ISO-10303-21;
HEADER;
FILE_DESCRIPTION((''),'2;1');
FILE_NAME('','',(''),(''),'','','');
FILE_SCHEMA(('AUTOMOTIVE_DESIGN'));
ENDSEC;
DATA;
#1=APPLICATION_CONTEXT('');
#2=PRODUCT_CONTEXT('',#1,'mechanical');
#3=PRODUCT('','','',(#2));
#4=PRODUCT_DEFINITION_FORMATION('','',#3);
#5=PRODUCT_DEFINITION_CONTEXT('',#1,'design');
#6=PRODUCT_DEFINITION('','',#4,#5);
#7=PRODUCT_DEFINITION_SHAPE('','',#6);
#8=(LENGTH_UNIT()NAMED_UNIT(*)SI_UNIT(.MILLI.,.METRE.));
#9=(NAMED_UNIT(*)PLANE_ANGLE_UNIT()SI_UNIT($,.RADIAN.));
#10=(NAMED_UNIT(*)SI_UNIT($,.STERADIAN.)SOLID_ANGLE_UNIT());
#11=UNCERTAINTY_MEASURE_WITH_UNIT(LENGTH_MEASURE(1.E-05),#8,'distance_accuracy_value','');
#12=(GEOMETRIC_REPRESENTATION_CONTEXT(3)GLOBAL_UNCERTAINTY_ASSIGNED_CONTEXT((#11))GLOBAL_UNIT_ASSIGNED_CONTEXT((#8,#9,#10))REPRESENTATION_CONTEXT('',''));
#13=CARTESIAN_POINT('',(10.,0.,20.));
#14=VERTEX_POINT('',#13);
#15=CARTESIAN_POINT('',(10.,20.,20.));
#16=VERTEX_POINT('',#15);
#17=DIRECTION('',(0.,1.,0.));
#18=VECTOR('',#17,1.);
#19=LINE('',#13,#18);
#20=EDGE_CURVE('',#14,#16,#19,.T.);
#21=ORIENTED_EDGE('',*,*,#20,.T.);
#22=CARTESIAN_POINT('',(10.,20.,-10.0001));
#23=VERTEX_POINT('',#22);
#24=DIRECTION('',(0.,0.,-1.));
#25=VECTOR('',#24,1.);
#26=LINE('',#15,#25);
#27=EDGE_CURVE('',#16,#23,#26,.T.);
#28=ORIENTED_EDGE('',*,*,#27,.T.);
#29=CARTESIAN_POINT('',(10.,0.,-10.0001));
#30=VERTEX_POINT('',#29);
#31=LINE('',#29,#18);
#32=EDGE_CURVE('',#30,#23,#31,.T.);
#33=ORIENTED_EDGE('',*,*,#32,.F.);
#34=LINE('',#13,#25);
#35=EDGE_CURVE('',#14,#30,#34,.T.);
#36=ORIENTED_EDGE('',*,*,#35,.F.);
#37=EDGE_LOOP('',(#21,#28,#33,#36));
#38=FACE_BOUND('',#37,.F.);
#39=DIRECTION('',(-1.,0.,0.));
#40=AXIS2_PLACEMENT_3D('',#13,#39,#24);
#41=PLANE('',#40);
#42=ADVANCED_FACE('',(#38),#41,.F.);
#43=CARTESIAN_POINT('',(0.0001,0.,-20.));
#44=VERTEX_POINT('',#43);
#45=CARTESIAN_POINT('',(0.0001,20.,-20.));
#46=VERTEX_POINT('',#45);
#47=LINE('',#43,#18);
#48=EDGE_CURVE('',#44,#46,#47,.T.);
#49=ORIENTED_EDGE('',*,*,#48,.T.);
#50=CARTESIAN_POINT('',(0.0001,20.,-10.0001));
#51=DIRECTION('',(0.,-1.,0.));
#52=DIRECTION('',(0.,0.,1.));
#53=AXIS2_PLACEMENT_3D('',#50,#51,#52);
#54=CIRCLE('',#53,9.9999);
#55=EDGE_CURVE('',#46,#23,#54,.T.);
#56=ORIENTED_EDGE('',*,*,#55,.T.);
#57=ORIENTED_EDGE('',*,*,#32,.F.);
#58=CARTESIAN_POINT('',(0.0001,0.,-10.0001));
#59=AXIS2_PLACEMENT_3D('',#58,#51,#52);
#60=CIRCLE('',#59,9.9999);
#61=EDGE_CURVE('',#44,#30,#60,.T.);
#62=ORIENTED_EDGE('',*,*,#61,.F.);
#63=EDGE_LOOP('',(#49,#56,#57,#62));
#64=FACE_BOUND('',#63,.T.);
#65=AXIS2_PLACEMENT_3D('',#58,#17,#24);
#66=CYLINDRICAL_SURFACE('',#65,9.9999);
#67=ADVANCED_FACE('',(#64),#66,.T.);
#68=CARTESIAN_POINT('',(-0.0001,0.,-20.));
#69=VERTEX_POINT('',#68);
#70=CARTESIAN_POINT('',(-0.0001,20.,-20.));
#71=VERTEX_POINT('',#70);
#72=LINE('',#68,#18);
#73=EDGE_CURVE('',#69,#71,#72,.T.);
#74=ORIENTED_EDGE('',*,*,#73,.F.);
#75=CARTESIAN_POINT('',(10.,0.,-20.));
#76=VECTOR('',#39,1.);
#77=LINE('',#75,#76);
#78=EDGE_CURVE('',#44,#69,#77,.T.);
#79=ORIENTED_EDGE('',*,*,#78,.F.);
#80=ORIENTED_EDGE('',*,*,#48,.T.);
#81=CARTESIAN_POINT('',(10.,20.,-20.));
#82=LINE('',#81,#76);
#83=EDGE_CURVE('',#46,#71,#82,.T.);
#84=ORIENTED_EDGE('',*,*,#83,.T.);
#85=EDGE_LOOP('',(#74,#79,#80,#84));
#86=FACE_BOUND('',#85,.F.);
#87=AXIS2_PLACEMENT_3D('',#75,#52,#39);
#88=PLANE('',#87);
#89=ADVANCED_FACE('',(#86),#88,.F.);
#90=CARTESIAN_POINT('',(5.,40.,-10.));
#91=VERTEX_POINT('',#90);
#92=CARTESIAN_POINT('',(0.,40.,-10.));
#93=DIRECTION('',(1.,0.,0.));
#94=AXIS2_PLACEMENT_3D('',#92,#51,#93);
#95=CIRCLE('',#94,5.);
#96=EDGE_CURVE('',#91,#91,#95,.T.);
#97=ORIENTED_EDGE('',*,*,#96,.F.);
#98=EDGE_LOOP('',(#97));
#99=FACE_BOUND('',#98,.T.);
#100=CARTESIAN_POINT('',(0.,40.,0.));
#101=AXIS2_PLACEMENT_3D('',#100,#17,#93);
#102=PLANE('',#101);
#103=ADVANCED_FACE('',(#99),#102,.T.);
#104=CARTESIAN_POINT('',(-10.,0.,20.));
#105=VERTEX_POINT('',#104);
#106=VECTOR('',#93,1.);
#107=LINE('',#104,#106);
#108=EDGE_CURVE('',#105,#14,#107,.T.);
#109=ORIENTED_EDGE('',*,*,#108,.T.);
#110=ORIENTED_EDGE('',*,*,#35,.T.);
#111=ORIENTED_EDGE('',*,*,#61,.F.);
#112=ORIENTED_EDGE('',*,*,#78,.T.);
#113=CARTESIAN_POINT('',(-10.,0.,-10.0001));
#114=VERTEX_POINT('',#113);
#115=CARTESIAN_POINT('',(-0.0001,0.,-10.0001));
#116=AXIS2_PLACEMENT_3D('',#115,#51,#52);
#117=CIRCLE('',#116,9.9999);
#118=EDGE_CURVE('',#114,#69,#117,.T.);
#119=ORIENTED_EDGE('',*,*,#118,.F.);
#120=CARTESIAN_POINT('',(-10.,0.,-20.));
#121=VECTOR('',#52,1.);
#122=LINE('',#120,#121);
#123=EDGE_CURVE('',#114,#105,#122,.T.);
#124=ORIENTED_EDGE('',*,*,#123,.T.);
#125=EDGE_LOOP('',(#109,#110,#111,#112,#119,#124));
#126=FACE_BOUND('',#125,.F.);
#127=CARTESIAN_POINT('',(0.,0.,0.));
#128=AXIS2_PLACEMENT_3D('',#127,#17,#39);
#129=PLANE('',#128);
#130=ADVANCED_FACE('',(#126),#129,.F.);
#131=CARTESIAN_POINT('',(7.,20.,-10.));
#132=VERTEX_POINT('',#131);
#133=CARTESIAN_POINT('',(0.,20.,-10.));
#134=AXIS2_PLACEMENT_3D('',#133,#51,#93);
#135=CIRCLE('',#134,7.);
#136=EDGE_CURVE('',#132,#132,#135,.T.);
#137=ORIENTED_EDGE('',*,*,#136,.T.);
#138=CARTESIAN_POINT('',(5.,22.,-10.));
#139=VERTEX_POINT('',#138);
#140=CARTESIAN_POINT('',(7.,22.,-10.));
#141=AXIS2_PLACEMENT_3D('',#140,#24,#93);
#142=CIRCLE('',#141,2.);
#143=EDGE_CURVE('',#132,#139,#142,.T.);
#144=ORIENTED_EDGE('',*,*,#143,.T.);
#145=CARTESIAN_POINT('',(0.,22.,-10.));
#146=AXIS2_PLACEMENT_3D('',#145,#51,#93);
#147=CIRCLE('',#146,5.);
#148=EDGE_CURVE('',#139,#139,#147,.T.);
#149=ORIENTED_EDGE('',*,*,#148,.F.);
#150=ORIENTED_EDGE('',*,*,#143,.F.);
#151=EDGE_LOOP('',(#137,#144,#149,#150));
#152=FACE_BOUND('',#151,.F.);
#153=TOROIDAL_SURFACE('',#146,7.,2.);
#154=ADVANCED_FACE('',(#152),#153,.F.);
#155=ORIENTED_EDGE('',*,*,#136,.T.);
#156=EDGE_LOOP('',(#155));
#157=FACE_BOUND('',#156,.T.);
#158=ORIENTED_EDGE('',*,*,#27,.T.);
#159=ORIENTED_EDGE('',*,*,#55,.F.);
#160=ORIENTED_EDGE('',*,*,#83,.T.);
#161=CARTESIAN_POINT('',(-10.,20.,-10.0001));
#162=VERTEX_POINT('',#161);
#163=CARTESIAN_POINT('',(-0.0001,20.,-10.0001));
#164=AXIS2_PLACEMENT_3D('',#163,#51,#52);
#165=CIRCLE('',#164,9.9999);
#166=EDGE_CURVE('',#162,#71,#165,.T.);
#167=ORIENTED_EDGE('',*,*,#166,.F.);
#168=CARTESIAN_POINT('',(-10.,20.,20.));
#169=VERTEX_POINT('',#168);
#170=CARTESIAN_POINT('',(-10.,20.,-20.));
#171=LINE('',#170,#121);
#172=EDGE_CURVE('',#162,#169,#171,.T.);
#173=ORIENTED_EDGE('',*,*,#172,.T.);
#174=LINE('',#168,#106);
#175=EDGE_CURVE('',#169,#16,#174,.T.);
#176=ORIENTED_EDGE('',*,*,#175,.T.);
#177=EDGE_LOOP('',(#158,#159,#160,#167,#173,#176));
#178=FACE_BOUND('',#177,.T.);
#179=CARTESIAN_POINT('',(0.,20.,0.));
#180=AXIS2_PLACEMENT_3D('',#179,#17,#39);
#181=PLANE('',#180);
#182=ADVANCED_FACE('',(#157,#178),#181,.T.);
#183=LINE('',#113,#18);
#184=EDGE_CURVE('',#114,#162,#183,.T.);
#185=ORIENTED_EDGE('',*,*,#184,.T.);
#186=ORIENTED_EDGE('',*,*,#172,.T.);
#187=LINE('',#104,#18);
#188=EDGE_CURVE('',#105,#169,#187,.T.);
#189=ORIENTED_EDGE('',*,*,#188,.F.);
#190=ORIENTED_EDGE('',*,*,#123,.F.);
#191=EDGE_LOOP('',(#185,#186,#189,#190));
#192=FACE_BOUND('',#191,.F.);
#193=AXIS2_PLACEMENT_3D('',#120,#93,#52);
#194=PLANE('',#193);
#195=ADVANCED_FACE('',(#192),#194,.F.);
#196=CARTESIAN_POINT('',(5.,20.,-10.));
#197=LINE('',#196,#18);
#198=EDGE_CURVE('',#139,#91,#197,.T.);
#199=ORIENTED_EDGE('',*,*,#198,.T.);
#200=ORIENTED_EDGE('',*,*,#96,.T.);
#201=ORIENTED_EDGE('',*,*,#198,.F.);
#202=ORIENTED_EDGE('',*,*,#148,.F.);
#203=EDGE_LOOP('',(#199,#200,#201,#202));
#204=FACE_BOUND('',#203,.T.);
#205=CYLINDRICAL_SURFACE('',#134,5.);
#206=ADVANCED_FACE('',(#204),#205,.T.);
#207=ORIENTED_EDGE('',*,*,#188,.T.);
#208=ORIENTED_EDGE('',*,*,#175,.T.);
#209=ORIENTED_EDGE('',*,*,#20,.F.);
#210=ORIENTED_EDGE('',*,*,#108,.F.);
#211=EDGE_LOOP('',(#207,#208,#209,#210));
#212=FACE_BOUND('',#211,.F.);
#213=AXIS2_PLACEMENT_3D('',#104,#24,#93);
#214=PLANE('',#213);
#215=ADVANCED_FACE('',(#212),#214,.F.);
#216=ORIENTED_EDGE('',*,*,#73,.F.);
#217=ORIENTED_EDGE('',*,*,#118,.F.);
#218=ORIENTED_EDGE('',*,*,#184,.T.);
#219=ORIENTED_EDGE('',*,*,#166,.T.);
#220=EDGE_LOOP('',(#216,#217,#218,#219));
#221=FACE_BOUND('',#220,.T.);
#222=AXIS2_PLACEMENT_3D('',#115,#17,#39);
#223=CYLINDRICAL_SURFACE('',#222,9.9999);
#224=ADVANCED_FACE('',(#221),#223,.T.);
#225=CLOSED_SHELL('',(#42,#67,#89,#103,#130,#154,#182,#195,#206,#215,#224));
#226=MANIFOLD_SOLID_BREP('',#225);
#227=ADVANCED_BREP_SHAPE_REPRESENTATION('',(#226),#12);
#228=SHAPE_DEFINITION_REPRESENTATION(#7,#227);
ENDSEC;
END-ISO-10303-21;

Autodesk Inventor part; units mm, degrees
ref_plane "YZ Plane" through (0, 0, 0) normal (1, 0, 0) x (0, 1, 0)
ref_plane "XZ Plane" through (0, 0, 0) normal (0, 1, 0) x (-1, 0, 0)
ref_plane "XY Plane" through (0, 0, 0) normal (0, 0, 1) x (1, 0, 0)
sketch "Schizzo1" plane through (0, 0, 0) normal (0, 1, 0) x (-1, 0, 0)
  line L0 (10, 20) -> (-10, 20)
  line L1 (-10, 20) -> (-10, -20)
  line L2 (-10, -20) -> (10, -20)
  line L3 (10, -20) -> (10, 20)
  line L4 (10, 20) -> (-10, -20) construction
  line L5 (-10, 20) -> (10, -20) construction
  point P0 (0, 0)
  dimension "d0" = 40
  dimension "d1" = 20
extrude "Estrusione1" add sketch "Schizzo1" along normal blind 20
sketch "Schizzo2" plane through (0, 20, 0) normal (0, 1, 0) x (1, 0, 0)
  line L0 (0, 0) -> (0, 10)
  circle A0 centre (0, 10) radius 5
  dimension "d4" = 10
  dimension "d5" = 10
extrude "Estrusione2" add sketch "Schizzo2" along normal blind 20
fillet "Raccordo1" radius 10 2 edges at (10, 10, -20) (-10, 10, -20)
fillet "Raccordo2" radius 2 1 edges at (-5, 20, -10)
properties part number "05-17-2023 cardine inferiore analisi fem"
